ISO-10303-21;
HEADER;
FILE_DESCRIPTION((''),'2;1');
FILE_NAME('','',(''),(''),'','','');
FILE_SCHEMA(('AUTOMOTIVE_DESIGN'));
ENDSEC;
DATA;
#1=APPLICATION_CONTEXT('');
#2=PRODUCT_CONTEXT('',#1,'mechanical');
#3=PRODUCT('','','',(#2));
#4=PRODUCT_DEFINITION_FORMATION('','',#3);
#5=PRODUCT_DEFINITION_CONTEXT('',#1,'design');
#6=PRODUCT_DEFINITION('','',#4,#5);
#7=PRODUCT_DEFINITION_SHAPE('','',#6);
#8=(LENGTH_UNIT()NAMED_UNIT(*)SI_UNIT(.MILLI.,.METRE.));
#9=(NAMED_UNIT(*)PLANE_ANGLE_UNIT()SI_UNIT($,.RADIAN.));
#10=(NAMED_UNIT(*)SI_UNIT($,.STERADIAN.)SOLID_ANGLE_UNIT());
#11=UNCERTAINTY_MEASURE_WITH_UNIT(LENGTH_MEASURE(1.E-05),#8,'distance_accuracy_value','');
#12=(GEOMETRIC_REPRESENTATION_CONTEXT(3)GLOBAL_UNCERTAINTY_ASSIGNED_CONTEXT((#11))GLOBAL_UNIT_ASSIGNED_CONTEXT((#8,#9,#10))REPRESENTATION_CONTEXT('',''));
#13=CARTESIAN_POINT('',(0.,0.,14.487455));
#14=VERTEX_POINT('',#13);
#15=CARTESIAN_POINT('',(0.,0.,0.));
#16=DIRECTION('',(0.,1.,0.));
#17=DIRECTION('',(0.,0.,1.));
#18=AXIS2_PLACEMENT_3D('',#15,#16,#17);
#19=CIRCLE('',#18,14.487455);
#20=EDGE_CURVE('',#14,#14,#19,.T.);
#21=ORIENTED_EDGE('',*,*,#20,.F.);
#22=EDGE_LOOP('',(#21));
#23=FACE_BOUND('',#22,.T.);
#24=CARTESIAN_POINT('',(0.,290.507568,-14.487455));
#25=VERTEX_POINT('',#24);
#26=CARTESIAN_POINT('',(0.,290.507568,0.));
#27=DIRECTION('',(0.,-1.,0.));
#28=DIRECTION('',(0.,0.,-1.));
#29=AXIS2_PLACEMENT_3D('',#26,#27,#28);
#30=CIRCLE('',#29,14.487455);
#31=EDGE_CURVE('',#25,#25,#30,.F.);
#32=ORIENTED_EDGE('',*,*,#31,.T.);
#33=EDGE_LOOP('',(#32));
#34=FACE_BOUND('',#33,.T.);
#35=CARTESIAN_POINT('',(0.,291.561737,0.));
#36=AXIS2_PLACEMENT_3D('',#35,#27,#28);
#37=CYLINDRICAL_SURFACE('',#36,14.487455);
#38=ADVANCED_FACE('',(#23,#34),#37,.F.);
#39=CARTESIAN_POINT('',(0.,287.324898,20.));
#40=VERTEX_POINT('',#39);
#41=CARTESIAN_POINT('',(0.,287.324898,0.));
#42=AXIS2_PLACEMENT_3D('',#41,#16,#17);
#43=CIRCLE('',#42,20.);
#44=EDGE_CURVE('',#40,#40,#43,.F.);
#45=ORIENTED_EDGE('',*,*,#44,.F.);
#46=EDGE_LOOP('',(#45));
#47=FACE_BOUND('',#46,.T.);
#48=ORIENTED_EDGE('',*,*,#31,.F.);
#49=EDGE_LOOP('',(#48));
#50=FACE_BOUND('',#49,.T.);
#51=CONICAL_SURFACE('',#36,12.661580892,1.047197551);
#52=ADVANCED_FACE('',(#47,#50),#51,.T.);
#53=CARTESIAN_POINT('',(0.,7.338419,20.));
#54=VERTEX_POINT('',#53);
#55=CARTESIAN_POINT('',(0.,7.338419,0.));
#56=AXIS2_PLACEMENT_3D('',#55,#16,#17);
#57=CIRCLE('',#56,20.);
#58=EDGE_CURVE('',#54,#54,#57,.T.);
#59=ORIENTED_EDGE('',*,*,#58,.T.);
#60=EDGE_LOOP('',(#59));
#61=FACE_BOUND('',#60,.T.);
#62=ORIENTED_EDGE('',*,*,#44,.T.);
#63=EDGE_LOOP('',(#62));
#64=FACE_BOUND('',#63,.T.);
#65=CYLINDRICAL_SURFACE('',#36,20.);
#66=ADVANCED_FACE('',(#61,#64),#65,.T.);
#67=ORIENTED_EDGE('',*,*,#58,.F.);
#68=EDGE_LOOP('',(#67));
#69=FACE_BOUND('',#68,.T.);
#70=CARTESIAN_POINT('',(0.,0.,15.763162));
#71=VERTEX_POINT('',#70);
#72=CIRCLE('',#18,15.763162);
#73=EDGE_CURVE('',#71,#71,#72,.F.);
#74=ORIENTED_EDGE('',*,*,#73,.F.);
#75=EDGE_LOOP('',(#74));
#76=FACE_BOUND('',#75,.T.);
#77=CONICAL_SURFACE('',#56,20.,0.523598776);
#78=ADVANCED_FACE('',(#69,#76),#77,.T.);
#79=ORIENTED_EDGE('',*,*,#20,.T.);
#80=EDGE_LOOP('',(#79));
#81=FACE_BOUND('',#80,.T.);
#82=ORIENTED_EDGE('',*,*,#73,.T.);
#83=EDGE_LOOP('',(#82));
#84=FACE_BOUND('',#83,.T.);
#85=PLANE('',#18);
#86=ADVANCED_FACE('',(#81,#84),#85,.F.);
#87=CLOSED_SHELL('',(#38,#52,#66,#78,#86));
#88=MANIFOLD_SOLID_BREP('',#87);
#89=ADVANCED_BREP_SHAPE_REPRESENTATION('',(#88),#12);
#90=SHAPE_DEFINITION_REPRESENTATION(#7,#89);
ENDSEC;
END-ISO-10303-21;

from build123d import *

# Parameters (mm, degrees)
SKETCH1_R           = 20
BOSS_EXTRUDE1_DEPTH = 291.561737
SKETCH2_R           = 14.48745524
CUT_EXTRUDE1_DEPTH  = 293.930446493
CHAMFER1_SIZE       = 4.236838
CHAMFER1_SIZE_2     = 7.338419


with BuildPart() as part:
    # Sketch1 → Boss-Extrude1 (new body)
    with BuildSketch(Plane(origin=(0, 0, 0), x_dir=(1, 0, 0), z_dir=(0, 1, 0))):
        with Locations(Location((0, 0, 0), (0, 0, 270))):
            Circle(SKETCH1_R)
    extrude(amount=BOSS_EXTRUDE1_DEPTH)

    # Sketch2 → Cut-Extrude1 (cut, through all)
    with BuildSketch(Plane(origin=(0, 0, 0), x_dir=(1, 0, 0), z_dir=(0, 1, 0))):
        with Locations(Location((0, 0, 0), (0, 0, 270))):
            Circle(SKETCH2_R)
    extrude(amount=CUT_EXTRUDE1_DEPTH, mode=Mode.SUBTRACT)

    # Chamfer1
    # the kernel refuses this chamfer: 7.338419, 4.236838 mm, written as the material it takes off along each edge
    with BuildSketch(Plane(origin=(0, 291.561737, 0), x_dir=(0, 0, 1), z_dir=(-1, 0, 0))) as chamfer1_piece_1:
        Polygon((20, -CHAMFER1_SIZE), (20 - CHAMFER1_SIZE_2, 0), (20, 0), align=None)
    revolve(axis=Axis((0, 291.561737, 0), (0, 1, 0)), mode=Mode.SUBTRACT)
    with BuildSketch(Plane(origin=(0, 0, 0), x_dir=(0, 0, 1), z_dir=(-1, 0, 0))) as chamfer1_piece_2:
        Polygon((20, CHAMFER1_SIZE_2), (20 - CHAMFER1_SIZE, 0), (20, 0), align=None)
    revolve(axis=Axis((0, 0, 0), (0, 1, 0)), mode=Mode.SUBTRACT)


solid = part.part
